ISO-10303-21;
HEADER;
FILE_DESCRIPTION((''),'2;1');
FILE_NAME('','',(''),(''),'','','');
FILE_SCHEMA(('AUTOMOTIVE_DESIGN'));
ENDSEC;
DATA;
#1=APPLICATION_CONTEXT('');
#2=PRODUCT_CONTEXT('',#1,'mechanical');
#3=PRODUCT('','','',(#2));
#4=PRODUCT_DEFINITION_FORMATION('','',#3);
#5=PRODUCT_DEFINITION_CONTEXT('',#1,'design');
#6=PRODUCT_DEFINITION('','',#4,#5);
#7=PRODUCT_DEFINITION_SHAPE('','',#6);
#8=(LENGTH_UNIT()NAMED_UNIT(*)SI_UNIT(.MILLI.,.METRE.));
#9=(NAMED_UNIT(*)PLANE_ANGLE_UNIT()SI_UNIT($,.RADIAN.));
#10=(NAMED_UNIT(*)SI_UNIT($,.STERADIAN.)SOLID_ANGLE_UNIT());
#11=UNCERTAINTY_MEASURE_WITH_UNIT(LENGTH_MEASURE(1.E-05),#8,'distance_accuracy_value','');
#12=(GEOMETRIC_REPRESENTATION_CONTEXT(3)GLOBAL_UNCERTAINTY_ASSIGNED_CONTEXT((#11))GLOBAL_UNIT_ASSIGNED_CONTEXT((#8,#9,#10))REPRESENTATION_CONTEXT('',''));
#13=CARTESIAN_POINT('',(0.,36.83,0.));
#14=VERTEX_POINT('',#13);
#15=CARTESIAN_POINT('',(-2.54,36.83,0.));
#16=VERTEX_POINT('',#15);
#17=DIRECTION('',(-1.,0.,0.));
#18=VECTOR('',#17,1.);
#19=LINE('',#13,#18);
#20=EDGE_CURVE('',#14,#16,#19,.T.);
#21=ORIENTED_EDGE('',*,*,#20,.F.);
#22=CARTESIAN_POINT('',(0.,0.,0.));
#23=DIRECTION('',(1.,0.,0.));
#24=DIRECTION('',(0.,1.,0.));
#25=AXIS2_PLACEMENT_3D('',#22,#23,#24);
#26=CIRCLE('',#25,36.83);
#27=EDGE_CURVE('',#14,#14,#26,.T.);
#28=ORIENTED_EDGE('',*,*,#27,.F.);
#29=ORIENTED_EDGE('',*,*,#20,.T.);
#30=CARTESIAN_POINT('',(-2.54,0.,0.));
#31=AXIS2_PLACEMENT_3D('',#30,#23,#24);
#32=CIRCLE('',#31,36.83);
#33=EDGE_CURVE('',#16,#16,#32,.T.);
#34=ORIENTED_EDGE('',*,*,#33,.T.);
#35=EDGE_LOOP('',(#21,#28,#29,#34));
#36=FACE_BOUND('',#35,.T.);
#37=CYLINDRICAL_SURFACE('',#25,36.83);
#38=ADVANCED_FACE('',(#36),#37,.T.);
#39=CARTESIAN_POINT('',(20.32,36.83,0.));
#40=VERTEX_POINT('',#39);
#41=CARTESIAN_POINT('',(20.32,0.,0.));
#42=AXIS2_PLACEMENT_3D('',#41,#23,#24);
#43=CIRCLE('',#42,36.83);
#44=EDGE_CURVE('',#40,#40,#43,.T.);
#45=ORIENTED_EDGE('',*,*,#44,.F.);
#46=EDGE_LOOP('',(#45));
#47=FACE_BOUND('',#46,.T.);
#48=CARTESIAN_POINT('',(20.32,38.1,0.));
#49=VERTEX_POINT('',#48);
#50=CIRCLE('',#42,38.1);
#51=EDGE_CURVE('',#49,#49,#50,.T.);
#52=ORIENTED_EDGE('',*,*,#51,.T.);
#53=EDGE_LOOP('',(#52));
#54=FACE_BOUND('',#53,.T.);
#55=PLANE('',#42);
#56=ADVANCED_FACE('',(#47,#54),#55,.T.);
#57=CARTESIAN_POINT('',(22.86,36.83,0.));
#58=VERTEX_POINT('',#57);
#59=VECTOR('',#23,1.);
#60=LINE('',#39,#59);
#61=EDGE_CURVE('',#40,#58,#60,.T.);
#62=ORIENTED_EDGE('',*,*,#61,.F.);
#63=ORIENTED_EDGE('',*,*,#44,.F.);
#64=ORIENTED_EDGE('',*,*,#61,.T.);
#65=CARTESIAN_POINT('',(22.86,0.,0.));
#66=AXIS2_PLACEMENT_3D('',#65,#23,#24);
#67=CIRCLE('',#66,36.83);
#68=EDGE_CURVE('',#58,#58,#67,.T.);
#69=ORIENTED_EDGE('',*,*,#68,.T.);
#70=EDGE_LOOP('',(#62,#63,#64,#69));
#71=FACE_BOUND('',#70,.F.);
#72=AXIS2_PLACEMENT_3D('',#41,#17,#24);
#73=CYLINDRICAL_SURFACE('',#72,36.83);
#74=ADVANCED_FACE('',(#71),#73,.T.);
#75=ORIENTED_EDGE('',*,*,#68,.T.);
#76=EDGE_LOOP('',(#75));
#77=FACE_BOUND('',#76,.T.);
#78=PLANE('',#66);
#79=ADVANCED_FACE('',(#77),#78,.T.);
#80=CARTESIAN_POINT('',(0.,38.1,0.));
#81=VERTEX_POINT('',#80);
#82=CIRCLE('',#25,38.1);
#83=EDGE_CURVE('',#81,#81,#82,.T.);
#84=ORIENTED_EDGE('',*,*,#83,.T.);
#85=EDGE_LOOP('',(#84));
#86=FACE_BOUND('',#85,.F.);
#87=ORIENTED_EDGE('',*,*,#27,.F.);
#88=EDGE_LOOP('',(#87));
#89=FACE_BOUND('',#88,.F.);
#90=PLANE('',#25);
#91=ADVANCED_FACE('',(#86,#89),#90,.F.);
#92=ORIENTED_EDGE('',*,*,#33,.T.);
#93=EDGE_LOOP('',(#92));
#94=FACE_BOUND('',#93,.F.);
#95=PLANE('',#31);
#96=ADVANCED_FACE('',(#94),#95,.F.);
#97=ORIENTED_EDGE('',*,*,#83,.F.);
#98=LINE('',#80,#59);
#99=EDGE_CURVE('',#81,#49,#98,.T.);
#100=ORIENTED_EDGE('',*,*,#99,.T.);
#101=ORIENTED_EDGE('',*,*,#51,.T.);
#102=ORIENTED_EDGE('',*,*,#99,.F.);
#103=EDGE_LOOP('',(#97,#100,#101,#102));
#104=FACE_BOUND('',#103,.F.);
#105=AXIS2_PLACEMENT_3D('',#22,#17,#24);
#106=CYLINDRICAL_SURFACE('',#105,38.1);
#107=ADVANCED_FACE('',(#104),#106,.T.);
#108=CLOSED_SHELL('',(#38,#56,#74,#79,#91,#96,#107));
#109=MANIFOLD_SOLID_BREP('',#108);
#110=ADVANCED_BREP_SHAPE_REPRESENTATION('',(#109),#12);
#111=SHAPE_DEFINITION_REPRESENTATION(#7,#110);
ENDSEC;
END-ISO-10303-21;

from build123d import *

# Parameters (mm, degrees)
F0_R     = 36.83
F1_DEPTH = 2.54
F2_R     = 38.1
F2_R_2   = 36.83
F3_DEPTH = 20.32
F4_R     = 36.83
F5_DEPTH = 2.54


with BuildPart() as f1:
    # F0 (on Right) → F1 (new body)
    with BuildSketch(Plane.YZ):
        Circle(F0_R)
    extrude(amount=-F1_DEPTH)

    # F2 (on face) → F3 (join)
    with BuildSketch(Plane.YZ):
        Circle(F2_R)
        Circle(F2_R_2, mode=Mode.SUBTRACT)
        Circle(F2_R_2)
    extrude(amount=F3_DEPTH)

    # F4 (on face) → F5 (join)
    with BuildSketch(Plane.YZ.offset(20.32)):
        Circle(F4_R)
    extrude(amount=F5_DEPTH)


solid = f1.part
